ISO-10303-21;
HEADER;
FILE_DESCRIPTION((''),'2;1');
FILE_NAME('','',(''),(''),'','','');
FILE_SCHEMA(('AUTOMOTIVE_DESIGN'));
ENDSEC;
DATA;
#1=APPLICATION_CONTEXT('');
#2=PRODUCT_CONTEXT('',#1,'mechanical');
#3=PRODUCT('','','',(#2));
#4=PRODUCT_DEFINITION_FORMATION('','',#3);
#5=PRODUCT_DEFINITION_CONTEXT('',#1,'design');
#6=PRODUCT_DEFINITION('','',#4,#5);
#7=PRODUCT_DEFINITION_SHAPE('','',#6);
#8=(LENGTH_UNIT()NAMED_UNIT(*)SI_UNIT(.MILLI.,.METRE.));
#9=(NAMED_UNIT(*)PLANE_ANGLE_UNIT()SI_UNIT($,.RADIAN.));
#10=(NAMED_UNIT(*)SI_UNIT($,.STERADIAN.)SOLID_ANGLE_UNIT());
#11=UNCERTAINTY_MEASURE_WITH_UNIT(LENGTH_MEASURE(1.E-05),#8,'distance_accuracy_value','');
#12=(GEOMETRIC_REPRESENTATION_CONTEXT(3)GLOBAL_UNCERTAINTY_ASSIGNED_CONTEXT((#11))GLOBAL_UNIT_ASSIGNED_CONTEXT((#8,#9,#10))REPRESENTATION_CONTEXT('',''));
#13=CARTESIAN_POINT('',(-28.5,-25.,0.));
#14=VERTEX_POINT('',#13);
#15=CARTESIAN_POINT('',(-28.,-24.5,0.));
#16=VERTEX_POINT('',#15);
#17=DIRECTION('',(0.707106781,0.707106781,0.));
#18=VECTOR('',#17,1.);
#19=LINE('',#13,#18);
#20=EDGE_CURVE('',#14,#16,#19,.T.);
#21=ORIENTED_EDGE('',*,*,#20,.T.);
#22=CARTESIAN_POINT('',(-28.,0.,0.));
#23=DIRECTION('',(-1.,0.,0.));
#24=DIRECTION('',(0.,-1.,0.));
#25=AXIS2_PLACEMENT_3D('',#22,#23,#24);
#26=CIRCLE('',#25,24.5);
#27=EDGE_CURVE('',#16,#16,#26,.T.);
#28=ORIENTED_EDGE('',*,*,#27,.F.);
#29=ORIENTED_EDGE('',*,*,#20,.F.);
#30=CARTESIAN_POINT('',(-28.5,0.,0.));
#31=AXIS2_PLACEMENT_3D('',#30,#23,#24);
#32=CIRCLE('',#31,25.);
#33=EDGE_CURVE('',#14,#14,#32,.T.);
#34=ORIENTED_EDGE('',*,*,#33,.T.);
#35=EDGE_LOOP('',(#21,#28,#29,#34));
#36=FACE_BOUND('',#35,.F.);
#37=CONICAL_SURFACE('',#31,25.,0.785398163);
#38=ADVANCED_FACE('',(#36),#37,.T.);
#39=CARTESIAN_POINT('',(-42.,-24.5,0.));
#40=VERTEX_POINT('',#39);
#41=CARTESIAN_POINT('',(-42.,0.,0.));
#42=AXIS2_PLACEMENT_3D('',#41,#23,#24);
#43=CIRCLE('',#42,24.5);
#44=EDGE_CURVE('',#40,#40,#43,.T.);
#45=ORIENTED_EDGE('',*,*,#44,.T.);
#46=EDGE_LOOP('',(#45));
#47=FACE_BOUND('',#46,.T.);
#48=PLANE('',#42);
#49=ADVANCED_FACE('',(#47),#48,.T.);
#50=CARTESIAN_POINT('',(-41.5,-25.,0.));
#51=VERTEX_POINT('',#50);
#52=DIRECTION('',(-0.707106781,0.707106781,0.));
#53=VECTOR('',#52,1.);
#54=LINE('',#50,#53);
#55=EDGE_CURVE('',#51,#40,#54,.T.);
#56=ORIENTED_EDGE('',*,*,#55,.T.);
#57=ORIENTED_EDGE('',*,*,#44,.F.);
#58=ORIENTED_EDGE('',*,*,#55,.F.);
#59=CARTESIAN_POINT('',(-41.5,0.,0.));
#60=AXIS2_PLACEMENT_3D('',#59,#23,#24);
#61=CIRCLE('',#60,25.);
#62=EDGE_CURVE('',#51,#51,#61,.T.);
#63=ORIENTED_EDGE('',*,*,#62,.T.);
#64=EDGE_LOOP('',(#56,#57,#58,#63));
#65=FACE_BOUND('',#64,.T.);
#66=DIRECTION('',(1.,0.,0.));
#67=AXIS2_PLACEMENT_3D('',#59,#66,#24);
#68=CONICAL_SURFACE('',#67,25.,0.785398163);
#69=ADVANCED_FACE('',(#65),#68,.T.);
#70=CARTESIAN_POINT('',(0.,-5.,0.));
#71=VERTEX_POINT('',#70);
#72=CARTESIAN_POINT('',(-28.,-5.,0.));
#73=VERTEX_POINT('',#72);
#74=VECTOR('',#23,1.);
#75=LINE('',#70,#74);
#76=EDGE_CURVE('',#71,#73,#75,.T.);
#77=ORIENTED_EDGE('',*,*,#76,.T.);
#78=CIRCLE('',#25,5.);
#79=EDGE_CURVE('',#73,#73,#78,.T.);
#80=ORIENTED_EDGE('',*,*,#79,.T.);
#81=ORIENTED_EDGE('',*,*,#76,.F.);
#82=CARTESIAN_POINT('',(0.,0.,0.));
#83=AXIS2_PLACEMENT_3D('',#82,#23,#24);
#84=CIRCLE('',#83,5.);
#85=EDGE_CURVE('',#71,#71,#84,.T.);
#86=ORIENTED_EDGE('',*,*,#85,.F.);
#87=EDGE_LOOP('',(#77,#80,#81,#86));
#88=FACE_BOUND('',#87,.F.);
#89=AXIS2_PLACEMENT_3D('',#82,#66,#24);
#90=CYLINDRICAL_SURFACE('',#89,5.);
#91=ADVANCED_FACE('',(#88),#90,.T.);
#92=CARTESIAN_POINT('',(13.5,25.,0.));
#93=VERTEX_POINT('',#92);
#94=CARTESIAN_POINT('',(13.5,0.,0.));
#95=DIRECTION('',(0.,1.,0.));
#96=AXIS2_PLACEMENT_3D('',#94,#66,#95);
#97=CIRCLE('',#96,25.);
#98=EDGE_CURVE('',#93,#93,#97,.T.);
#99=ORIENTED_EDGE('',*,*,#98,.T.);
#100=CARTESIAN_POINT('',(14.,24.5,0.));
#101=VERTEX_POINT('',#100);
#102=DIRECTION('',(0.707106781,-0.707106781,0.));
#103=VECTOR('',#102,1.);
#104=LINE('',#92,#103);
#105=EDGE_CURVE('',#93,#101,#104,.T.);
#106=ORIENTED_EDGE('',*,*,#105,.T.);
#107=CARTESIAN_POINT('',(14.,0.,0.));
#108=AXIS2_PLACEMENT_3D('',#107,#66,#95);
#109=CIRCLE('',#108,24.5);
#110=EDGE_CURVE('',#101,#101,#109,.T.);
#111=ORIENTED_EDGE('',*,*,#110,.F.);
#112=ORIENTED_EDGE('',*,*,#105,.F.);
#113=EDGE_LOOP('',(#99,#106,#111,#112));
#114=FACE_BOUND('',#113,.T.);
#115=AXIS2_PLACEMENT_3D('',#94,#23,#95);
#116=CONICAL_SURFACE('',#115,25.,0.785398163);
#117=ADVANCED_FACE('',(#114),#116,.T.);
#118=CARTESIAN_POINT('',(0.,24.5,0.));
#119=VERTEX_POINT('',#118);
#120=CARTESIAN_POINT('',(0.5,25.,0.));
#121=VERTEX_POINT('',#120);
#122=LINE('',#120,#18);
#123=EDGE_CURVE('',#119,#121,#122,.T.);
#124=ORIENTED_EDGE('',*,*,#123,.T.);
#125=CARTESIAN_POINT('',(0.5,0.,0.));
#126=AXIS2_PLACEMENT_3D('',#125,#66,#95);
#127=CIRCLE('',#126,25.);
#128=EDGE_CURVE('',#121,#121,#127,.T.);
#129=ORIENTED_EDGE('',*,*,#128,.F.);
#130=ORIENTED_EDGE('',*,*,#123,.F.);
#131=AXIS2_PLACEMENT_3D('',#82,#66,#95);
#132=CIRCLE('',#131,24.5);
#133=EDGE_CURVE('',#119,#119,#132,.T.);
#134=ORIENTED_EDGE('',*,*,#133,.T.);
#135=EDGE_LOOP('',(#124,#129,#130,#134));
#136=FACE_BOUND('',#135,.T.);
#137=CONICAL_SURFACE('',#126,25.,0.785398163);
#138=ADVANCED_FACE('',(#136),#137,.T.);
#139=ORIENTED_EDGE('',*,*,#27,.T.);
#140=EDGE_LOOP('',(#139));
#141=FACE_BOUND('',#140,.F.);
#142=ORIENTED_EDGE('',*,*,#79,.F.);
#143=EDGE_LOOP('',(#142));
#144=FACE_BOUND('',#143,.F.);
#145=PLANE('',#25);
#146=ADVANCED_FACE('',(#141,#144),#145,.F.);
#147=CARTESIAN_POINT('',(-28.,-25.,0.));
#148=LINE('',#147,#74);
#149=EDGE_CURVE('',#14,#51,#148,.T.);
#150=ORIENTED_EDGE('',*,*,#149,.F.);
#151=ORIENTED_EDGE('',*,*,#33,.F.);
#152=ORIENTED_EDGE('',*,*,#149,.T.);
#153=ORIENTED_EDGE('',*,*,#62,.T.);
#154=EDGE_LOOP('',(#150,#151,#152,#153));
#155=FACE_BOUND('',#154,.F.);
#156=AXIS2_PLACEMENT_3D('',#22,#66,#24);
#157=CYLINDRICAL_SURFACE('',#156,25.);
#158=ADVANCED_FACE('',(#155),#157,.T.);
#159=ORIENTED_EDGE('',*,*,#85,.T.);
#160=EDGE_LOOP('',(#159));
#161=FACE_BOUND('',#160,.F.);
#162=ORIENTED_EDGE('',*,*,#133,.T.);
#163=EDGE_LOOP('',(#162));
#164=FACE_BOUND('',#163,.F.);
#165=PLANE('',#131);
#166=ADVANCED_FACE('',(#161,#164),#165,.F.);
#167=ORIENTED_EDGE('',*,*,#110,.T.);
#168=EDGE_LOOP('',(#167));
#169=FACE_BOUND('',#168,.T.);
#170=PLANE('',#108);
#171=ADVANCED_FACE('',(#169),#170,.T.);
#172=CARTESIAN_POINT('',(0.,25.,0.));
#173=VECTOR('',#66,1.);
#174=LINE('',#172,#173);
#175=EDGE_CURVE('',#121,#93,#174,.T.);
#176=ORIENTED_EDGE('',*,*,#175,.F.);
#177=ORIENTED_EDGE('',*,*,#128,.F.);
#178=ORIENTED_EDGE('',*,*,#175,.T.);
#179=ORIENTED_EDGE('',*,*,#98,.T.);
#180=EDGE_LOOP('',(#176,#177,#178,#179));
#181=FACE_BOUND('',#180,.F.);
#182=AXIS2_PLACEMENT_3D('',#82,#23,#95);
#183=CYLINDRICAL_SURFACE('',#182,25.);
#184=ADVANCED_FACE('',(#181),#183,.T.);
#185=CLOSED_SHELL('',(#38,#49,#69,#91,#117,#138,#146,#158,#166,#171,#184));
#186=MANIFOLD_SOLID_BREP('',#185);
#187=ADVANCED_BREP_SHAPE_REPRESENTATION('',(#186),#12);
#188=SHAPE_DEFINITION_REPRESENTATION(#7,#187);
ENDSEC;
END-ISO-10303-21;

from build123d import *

# Parameters (mm, degrees)
F0_R     = 25
F1_DEPTH = 14
F2_R     = 5
F3_DEPTH = 28
F4_R     = 25
F5_DEPTH = 14
F6_SIZE  = 0.5


with BuildPart() as f1:
    # F0 (on Right) → F1 (new body)
    with BuildSketch(Plane.YZ):
        Circle(F0_R)
    extrude(amount=F1_DEPTH)

    # F2 (on face) → F3 (join)
    with BuildSketch(Plane(origin=(0, 0, 0), x_dir=(0, -1, 0), z_dir=(-1, 0, 0))):
        Circle(F2_R)
    extrude(amount=F3_DEPTH)

    # F4 (on face) → F5 (join)
    with BuildSketch(Plane(origin=(-28, 0, 0), x_dir=(0, -1, 0), z_dir=(-1, 0, 0))):
        Circle(F4_R)
    extrude(amount=F5_DEPTH)

    # F6
    f6_edges = [f1.edges().sort_by_distance(p)[0] for p in [
        (14, -25, 0),
        (0, -25, 0),
        (-35, -25, 0),
        (-28, 25, 0),
        (-42, 25, 0),
    ]]
    chamfer(f6_edges, length=F6_SIZE)


solid = f1.part
